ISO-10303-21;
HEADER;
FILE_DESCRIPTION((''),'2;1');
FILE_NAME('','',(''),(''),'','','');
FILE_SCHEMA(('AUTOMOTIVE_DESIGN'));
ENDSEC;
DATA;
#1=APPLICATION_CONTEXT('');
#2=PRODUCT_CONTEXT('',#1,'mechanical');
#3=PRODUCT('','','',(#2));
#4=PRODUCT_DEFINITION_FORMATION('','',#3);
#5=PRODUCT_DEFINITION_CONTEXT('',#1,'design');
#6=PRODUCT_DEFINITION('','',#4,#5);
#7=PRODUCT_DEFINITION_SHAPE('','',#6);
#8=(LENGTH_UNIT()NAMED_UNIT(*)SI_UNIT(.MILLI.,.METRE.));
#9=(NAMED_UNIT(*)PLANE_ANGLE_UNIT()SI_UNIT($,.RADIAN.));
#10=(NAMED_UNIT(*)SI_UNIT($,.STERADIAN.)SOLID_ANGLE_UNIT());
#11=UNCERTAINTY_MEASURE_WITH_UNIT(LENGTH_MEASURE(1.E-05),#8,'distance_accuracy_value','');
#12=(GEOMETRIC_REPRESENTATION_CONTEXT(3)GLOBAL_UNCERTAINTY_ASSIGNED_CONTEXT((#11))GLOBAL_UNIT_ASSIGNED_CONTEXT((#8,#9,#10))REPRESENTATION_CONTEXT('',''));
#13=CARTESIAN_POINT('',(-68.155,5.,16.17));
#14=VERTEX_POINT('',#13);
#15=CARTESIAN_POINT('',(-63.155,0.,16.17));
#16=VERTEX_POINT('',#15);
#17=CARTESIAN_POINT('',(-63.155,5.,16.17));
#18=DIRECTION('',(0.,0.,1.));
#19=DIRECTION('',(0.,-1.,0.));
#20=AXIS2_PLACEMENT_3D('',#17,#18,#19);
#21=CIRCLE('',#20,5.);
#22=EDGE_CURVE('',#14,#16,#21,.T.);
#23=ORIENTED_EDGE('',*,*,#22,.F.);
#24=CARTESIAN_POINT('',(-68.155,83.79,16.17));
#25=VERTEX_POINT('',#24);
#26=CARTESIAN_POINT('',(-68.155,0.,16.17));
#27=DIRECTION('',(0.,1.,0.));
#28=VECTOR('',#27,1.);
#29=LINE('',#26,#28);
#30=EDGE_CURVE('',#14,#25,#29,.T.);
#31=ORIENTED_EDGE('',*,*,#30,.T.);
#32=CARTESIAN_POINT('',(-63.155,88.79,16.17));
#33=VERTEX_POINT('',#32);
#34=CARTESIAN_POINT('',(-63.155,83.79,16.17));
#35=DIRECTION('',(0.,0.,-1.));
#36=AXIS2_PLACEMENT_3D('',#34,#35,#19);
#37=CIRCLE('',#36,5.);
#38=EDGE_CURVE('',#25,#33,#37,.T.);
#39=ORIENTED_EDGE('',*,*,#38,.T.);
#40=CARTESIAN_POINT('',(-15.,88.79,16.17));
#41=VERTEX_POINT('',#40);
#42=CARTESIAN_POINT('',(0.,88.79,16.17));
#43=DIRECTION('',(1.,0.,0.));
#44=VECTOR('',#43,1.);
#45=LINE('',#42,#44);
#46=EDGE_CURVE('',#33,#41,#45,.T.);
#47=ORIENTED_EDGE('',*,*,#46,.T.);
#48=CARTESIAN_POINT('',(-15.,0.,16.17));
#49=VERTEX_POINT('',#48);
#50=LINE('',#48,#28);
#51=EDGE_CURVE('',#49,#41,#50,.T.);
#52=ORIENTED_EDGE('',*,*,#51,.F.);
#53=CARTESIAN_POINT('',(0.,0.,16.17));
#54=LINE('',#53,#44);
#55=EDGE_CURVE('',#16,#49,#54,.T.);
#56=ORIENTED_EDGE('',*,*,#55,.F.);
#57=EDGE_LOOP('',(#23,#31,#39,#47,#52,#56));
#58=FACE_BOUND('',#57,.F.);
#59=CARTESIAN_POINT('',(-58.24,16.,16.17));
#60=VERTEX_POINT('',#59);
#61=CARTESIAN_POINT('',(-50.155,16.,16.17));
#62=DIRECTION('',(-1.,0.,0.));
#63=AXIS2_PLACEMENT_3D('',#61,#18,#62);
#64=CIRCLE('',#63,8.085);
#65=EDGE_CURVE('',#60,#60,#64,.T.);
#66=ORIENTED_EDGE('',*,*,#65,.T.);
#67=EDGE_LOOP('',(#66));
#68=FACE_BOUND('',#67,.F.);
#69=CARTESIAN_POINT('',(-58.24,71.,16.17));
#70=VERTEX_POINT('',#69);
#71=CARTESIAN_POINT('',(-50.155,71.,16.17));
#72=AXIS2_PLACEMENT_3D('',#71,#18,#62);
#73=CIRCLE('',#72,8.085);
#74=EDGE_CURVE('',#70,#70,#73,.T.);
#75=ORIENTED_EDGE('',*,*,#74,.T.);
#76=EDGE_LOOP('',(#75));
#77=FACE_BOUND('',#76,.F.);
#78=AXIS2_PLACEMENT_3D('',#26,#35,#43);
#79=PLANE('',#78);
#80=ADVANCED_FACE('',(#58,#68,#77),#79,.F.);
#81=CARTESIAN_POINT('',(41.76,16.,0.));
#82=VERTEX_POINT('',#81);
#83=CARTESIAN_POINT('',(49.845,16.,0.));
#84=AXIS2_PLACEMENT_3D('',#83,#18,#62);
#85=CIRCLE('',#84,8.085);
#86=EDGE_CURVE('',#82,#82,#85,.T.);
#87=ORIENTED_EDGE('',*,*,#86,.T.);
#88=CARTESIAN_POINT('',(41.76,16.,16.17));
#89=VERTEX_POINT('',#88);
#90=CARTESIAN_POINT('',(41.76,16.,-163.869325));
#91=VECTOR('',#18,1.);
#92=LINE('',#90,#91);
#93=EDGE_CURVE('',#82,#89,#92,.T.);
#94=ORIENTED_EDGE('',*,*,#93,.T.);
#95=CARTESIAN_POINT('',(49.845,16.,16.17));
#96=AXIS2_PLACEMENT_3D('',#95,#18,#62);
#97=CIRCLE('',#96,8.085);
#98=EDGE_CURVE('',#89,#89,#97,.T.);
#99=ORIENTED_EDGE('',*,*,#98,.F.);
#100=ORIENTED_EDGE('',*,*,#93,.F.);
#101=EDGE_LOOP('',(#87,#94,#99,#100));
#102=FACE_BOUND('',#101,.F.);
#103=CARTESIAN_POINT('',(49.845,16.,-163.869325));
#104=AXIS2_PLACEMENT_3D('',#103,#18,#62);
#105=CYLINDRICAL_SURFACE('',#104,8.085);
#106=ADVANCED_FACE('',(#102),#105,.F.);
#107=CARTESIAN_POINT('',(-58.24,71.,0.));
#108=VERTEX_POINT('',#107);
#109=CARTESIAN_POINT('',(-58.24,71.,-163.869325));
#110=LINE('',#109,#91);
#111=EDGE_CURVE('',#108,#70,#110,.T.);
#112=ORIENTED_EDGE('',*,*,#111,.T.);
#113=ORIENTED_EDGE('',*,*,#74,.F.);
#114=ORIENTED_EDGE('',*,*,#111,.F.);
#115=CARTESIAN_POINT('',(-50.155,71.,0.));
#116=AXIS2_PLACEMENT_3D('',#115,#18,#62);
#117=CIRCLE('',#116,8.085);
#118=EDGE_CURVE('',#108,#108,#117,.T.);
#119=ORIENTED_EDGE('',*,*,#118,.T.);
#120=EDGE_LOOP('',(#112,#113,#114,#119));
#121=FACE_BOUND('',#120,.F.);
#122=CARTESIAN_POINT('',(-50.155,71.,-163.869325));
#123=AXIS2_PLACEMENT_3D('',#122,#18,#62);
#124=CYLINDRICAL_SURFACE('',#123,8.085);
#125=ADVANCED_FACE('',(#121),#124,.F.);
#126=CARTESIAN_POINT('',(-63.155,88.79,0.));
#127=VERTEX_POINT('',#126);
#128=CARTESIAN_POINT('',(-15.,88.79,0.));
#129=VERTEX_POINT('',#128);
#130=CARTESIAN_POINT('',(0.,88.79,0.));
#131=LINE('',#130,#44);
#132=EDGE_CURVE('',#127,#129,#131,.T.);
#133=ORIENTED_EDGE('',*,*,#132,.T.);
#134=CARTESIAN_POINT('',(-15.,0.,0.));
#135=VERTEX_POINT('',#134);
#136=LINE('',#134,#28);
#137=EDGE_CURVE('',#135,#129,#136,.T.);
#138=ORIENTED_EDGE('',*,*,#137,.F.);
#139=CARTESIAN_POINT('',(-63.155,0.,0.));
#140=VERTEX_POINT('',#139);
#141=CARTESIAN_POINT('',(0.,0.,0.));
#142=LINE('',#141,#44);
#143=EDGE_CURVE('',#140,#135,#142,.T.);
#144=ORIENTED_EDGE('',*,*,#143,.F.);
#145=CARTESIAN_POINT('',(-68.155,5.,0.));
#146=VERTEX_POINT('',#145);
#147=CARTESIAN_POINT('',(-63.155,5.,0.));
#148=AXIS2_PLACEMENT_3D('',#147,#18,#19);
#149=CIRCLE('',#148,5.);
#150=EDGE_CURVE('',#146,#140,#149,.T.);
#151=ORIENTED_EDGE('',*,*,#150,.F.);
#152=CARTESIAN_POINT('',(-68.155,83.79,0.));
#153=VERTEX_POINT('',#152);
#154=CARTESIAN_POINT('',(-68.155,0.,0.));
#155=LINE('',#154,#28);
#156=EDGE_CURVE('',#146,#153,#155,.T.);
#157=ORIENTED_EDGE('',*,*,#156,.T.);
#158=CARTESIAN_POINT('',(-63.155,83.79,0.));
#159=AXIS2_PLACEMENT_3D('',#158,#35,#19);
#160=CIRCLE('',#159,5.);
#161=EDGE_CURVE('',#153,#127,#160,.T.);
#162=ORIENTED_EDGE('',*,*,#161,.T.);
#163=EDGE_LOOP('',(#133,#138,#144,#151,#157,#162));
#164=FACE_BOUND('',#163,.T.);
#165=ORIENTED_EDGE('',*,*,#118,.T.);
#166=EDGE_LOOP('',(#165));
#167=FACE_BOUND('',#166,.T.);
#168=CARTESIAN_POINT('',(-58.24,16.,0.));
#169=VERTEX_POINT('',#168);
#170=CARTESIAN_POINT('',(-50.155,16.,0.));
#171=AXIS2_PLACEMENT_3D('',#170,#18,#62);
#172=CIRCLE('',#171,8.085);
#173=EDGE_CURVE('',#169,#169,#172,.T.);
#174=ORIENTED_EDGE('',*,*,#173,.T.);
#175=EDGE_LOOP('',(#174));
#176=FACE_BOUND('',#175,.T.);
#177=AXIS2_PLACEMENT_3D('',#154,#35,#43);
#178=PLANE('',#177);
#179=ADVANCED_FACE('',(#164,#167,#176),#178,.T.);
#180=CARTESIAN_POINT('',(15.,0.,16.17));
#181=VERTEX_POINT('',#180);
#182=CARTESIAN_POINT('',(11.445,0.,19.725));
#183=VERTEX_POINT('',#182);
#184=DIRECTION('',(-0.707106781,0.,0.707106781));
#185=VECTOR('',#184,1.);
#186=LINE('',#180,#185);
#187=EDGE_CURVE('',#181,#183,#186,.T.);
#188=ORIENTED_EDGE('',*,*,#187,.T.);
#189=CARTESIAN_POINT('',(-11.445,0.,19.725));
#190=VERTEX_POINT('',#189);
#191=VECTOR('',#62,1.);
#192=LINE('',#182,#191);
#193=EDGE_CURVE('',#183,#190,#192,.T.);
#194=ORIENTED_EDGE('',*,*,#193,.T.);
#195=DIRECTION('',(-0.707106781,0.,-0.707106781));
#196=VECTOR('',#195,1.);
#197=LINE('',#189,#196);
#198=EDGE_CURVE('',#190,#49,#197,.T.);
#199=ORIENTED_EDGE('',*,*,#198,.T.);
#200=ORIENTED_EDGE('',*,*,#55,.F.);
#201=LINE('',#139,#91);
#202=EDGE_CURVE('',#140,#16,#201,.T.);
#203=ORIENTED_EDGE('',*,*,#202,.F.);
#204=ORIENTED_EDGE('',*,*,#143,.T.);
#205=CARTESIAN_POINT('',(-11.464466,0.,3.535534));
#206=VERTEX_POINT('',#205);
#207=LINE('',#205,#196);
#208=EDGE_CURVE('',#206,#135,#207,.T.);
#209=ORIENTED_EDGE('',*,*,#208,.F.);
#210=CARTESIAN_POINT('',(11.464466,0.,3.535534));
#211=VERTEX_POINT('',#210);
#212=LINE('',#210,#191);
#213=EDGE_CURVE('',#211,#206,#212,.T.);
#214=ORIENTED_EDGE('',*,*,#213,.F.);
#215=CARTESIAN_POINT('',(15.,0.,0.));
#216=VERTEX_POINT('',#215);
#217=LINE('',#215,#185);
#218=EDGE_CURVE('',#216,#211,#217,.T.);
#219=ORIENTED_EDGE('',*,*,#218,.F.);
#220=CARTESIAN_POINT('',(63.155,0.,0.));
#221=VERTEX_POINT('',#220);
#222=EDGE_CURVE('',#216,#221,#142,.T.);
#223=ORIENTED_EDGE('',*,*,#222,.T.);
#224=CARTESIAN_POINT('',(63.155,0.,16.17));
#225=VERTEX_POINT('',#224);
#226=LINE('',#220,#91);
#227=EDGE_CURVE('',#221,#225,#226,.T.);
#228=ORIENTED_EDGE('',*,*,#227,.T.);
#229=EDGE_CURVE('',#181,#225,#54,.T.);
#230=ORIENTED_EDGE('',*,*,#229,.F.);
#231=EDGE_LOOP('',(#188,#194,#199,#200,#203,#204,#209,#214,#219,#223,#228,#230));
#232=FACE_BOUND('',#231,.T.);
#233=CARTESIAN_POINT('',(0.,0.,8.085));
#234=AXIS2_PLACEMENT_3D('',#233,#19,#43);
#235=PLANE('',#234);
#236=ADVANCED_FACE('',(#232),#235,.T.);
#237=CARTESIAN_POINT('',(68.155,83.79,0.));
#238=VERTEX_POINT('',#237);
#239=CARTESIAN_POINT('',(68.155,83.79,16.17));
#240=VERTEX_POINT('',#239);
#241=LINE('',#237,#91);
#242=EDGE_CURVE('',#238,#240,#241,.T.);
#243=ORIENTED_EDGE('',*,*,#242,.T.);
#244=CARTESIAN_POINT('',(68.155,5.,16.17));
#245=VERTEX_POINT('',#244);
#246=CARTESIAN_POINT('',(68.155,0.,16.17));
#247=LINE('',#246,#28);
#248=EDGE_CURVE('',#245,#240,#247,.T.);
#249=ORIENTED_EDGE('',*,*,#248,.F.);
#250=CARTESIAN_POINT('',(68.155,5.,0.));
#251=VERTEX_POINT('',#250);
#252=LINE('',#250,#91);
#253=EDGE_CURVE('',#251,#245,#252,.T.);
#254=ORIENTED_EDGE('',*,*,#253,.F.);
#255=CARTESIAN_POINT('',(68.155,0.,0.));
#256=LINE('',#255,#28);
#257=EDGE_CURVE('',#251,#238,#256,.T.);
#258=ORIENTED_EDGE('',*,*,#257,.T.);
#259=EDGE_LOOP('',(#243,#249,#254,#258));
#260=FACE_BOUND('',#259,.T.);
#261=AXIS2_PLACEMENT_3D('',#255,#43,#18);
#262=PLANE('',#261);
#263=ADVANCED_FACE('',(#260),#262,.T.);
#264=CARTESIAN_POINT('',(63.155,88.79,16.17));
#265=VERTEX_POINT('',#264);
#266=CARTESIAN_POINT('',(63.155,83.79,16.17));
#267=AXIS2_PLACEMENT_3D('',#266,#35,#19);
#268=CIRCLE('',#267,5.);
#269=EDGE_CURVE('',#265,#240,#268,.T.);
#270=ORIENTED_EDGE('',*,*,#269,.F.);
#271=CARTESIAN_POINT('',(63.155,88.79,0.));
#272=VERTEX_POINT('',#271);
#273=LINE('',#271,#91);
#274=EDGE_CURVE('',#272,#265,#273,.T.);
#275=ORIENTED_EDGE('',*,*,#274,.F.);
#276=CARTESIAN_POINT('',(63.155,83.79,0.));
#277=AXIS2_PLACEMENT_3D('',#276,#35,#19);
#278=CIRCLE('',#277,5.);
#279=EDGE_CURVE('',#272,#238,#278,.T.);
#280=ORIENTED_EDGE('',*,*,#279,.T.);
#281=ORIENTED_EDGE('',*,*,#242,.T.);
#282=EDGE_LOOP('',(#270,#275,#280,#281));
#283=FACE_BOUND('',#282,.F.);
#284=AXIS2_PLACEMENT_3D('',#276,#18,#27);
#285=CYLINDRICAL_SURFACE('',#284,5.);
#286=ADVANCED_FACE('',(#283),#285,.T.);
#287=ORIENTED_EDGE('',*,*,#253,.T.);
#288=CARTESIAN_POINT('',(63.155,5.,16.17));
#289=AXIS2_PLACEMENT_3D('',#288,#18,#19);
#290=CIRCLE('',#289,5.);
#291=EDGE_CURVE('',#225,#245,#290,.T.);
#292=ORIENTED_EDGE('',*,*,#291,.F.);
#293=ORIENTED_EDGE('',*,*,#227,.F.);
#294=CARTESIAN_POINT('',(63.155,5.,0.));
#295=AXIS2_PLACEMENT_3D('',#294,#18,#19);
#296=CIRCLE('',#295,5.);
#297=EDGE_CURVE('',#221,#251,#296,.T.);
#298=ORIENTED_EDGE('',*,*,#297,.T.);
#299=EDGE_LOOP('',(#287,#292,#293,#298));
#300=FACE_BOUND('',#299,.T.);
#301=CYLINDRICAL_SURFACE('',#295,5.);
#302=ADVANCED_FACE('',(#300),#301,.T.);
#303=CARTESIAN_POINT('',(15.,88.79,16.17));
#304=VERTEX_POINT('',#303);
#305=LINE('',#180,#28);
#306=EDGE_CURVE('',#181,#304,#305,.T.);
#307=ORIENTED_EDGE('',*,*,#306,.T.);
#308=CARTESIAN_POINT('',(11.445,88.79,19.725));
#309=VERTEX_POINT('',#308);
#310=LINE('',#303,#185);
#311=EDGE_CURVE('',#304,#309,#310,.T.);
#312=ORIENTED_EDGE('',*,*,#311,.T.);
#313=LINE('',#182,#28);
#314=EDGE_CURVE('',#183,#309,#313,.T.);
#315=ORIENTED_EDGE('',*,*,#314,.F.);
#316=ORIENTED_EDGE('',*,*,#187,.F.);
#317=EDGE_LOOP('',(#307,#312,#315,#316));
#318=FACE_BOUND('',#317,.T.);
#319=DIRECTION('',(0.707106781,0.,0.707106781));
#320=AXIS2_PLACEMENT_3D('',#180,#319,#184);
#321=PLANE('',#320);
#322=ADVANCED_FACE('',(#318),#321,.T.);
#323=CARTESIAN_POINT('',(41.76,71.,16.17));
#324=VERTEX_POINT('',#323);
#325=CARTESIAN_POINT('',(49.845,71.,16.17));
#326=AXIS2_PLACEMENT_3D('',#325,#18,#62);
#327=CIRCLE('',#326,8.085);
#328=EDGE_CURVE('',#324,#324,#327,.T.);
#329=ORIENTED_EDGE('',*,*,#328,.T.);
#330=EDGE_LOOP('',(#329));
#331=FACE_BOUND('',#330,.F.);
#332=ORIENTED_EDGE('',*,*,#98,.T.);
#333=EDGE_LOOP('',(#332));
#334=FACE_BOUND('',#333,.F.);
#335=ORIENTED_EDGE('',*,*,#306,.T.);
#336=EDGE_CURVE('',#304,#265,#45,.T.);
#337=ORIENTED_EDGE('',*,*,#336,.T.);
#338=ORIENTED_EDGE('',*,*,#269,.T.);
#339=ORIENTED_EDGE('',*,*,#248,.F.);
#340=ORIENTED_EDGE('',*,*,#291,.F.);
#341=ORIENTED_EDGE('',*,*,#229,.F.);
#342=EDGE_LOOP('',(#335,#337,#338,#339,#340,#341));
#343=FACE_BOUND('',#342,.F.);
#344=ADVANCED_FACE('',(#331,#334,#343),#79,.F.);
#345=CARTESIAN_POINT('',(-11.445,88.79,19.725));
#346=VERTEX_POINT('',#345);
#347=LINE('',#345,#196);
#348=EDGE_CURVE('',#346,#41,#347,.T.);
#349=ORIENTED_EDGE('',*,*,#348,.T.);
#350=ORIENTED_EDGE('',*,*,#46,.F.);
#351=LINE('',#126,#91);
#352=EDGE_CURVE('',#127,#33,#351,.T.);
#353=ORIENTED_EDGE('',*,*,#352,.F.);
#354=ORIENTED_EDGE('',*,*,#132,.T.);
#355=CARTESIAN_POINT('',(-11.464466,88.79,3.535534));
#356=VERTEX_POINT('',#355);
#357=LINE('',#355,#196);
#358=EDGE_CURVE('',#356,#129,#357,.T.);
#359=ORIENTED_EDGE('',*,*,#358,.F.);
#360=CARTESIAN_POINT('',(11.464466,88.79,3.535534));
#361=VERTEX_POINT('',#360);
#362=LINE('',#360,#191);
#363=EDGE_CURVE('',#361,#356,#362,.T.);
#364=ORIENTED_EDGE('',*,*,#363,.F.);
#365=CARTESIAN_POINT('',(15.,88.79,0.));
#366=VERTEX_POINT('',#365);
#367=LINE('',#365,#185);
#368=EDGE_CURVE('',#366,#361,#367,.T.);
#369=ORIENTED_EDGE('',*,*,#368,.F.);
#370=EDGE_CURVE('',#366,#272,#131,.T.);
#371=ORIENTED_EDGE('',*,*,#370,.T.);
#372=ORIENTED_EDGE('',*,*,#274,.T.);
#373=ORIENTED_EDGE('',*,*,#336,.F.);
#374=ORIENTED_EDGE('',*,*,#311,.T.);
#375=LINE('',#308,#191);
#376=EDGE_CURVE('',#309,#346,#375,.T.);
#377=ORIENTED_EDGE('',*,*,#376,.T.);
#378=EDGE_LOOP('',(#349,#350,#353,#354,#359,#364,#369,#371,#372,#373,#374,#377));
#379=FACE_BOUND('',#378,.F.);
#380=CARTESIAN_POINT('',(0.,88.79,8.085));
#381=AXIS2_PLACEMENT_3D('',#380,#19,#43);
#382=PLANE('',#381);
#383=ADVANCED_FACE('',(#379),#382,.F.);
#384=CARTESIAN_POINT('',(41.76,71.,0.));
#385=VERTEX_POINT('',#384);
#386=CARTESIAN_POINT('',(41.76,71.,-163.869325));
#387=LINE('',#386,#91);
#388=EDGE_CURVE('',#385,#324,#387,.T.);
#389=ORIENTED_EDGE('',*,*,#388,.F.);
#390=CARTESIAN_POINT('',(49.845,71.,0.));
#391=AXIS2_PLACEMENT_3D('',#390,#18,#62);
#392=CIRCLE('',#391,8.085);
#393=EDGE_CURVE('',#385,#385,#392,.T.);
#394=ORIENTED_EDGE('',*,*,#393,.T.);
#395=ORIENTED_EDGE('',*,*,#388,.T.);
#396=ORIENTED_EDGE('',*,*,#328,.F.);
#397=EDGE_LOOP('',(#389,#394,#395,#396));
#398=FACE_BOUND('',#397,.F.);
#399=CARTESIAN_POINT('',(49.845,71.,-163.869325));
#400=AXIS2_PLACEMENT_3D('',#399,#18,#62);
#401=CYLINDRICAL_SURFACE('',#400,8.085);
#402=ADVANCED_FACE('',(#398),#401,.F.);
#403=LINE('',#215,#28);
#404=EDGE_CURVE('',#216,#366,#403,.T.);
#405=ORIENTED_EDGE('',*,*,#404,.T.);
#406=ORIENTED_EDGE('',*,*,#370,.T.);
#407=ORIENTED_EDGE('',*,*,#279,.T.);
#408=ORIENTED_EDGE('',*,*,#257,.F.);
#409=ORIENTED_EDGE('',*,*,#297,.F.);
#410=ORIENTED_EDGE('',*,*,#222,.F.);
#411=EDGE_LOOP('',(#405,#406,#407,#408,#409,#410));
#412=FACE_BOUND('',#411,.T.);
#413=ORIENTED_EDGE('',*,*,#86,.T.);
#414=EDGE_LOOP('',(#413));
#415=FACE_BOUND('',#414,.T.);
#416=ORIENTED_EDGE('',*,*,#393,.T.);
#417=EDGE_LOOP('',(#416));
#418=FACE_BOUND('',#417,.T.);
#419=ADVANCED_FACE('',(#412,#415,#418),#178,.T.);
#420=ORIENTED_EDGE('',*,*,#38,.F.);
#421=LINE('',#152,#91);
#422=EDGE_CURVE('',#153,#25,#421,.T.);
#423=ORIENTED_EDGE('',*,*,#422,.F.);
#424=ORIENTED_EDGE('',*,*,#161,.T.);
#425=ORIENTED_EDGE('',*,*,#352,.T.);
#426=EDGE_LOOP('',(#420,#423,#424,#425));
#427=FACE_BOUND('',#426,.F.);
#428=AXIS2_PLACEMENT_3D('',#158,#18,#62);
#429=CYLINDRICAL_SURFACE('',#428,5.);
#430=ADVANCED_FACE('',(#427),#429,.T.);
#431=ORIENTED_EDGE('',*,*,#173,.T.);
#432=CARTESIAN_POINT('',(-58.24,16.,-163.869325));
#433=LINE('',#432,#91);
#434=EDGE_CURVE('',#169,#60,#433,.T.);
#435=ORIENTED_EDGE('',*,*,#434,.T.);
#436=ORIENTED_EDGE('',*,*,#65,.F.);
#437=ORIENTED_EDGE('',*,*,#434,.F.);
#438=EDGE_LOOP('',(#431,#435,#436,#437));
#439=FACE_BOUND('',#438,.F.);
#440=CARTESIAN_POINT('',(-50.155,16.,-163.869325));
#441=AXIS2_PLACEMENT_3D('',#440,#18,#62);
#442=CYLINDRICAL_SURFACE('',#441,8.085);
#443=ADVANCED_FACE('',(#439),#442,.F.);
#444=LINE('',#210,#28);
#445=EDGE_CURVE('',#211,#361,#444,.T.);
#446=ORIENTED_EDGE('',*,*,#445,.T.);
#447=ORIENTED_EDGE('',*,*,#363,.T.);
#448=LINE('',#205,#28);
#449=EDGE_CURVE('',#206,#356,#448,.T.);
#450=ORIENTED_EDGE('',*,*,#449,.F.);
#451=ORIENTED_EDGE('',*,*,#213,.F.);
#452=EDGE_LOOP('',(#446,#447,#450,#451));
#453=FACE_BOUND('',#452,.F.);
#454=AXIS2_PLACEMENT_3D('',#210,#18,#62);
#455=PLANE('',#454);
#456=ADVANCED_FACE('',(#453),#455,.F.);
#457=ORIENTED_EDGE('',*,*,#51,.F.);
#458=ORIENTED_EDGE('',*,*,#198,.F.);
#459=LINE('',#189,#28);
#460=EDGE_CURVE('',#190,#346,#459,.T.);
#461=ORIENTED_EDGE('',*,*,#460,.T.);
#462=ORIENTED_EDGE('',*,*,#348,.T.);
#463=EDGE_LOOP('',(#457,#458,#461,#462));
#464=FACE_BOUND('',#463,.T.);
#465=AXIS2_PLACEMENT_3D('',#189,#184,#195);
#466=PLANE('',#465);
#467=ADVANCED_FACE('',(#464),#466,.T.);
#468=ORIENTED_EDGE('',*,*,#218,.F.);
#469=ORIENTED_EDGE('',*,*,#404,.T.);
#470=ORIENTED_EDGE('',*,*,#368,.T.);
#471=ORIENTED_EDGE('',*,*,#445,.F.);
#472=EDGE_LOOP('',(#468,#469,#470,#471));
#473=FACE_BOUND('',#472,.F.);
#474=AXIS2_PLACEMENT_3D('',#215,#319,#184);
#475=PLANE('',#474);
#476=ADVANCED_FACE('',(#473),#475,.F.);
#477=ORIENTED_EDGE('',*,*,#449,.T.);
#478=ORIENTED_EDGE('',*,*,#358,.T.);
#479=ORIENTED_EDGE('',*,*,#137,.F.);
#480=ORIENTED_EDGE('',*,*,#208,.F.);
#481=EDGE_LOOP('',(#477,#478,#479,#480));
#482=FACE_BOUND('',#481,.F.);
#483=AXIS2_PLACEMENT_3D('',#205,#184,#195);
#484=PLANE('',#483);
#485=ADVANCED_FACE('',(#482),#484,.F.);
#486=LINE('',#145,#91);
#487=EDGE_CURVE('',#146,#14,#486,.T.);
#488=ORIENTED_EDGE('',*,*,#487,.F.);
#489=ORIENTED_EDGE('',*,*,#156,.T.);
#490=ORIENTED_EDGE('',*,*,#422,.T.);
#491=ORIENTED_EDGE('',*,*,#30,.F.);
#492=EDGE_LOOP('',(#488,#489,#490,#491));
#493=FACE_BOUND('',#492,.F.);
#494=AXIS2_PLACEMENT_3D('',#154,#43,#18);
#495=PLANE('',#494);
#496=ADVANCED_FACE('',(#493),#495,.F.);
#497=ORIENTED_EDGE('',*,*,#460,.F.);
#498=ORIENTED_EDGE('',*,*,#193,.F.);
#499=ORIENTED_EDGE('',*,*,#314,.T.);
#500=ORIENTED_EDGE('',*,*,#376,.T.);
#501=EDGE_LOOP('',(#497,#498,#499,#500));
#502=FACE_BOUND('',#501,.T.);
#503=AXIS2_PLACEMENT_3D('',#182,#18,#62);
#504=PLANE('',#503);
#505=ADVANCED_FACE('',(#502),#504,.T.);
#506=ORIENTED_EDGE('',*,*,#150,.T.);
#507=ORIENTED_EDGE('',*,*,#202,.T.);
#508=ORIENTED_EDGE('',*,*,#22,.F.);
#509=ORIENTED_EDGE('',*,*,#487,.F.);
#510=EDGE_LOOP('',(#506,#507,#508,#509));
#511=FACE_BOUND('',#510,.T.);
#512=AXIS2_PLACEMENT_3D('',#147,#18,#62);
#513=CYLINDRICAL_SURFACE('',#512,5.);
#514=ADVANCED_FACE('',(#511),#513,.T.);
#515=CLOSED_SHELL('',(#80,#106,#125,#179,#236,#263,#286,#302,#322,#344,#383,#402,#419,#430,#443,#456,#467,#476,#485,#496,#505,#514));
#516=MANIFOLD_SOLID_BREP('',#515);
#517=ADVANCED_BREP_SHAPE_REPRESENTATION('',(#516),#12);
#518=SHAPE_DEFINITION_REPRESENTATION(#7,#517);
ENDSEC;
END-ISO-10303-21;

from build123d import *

# Parameters (mm, degrees)
F0_W     = 136.31
F0_H     = 16.17
F1_DEPTH = 88.79
F3_DEPTH = 88.79
F5_DEPTH = 88.79
F6_R     = 5
F8_D     = 16.17


with BuildPart() as f1:
    # F0 (on Front) → F1 (new body)
    with BuildSketch(Plane.XZ):
        with Locations((0, 8.085)):
            Rectangle(F0_W, F0_H)
    extrude(amount=-F1_DEPTH)

    # F2 (on face) → F3 (join)
    with BuildSketch(Plane.XZ):
        Polygon((-15, 16.17), (0, 16.17), (15, 16.17), (11.445, 19.725), (-11.445, 19.725), align=None)
    extrude(amount=-F3_DEPTH)

    # F4 (on Front) → F5 (cut)
    with BuildSketch(Plane.XZ):
        Polygon((-15, 0), (0, 0), (15, 0), (11.4644660941, 3.5355339059), (-11.4644660941, 3.5355339059), align=None)
    extrude(amount=-F5_DEPTH, mode=Mode.SUBTRACT)

    # F6
    f6_edges = [f1.edges().sort_by_distance(p)[0] for p in [
        (68.155, 88.79, 8.085),
        (-68.155, 88.79, 8.085),
        (68.155, 0, 8.085),
        (-68.155, 0, 8.085),
    ]]
    fillet(f6_edges, radius=F6_R)

    # F8 (through all)
    with Locations(Plane(origin=(0, 0, 0), x_dir=(1, 0, 0), z_dir=(0, 0, -1))):
        with Locations((-50.155, -71), (-50.155, -16), (49.845, -71), (49.845, -16)):
            Hole(F8_D / 2)


solid = f1.part
